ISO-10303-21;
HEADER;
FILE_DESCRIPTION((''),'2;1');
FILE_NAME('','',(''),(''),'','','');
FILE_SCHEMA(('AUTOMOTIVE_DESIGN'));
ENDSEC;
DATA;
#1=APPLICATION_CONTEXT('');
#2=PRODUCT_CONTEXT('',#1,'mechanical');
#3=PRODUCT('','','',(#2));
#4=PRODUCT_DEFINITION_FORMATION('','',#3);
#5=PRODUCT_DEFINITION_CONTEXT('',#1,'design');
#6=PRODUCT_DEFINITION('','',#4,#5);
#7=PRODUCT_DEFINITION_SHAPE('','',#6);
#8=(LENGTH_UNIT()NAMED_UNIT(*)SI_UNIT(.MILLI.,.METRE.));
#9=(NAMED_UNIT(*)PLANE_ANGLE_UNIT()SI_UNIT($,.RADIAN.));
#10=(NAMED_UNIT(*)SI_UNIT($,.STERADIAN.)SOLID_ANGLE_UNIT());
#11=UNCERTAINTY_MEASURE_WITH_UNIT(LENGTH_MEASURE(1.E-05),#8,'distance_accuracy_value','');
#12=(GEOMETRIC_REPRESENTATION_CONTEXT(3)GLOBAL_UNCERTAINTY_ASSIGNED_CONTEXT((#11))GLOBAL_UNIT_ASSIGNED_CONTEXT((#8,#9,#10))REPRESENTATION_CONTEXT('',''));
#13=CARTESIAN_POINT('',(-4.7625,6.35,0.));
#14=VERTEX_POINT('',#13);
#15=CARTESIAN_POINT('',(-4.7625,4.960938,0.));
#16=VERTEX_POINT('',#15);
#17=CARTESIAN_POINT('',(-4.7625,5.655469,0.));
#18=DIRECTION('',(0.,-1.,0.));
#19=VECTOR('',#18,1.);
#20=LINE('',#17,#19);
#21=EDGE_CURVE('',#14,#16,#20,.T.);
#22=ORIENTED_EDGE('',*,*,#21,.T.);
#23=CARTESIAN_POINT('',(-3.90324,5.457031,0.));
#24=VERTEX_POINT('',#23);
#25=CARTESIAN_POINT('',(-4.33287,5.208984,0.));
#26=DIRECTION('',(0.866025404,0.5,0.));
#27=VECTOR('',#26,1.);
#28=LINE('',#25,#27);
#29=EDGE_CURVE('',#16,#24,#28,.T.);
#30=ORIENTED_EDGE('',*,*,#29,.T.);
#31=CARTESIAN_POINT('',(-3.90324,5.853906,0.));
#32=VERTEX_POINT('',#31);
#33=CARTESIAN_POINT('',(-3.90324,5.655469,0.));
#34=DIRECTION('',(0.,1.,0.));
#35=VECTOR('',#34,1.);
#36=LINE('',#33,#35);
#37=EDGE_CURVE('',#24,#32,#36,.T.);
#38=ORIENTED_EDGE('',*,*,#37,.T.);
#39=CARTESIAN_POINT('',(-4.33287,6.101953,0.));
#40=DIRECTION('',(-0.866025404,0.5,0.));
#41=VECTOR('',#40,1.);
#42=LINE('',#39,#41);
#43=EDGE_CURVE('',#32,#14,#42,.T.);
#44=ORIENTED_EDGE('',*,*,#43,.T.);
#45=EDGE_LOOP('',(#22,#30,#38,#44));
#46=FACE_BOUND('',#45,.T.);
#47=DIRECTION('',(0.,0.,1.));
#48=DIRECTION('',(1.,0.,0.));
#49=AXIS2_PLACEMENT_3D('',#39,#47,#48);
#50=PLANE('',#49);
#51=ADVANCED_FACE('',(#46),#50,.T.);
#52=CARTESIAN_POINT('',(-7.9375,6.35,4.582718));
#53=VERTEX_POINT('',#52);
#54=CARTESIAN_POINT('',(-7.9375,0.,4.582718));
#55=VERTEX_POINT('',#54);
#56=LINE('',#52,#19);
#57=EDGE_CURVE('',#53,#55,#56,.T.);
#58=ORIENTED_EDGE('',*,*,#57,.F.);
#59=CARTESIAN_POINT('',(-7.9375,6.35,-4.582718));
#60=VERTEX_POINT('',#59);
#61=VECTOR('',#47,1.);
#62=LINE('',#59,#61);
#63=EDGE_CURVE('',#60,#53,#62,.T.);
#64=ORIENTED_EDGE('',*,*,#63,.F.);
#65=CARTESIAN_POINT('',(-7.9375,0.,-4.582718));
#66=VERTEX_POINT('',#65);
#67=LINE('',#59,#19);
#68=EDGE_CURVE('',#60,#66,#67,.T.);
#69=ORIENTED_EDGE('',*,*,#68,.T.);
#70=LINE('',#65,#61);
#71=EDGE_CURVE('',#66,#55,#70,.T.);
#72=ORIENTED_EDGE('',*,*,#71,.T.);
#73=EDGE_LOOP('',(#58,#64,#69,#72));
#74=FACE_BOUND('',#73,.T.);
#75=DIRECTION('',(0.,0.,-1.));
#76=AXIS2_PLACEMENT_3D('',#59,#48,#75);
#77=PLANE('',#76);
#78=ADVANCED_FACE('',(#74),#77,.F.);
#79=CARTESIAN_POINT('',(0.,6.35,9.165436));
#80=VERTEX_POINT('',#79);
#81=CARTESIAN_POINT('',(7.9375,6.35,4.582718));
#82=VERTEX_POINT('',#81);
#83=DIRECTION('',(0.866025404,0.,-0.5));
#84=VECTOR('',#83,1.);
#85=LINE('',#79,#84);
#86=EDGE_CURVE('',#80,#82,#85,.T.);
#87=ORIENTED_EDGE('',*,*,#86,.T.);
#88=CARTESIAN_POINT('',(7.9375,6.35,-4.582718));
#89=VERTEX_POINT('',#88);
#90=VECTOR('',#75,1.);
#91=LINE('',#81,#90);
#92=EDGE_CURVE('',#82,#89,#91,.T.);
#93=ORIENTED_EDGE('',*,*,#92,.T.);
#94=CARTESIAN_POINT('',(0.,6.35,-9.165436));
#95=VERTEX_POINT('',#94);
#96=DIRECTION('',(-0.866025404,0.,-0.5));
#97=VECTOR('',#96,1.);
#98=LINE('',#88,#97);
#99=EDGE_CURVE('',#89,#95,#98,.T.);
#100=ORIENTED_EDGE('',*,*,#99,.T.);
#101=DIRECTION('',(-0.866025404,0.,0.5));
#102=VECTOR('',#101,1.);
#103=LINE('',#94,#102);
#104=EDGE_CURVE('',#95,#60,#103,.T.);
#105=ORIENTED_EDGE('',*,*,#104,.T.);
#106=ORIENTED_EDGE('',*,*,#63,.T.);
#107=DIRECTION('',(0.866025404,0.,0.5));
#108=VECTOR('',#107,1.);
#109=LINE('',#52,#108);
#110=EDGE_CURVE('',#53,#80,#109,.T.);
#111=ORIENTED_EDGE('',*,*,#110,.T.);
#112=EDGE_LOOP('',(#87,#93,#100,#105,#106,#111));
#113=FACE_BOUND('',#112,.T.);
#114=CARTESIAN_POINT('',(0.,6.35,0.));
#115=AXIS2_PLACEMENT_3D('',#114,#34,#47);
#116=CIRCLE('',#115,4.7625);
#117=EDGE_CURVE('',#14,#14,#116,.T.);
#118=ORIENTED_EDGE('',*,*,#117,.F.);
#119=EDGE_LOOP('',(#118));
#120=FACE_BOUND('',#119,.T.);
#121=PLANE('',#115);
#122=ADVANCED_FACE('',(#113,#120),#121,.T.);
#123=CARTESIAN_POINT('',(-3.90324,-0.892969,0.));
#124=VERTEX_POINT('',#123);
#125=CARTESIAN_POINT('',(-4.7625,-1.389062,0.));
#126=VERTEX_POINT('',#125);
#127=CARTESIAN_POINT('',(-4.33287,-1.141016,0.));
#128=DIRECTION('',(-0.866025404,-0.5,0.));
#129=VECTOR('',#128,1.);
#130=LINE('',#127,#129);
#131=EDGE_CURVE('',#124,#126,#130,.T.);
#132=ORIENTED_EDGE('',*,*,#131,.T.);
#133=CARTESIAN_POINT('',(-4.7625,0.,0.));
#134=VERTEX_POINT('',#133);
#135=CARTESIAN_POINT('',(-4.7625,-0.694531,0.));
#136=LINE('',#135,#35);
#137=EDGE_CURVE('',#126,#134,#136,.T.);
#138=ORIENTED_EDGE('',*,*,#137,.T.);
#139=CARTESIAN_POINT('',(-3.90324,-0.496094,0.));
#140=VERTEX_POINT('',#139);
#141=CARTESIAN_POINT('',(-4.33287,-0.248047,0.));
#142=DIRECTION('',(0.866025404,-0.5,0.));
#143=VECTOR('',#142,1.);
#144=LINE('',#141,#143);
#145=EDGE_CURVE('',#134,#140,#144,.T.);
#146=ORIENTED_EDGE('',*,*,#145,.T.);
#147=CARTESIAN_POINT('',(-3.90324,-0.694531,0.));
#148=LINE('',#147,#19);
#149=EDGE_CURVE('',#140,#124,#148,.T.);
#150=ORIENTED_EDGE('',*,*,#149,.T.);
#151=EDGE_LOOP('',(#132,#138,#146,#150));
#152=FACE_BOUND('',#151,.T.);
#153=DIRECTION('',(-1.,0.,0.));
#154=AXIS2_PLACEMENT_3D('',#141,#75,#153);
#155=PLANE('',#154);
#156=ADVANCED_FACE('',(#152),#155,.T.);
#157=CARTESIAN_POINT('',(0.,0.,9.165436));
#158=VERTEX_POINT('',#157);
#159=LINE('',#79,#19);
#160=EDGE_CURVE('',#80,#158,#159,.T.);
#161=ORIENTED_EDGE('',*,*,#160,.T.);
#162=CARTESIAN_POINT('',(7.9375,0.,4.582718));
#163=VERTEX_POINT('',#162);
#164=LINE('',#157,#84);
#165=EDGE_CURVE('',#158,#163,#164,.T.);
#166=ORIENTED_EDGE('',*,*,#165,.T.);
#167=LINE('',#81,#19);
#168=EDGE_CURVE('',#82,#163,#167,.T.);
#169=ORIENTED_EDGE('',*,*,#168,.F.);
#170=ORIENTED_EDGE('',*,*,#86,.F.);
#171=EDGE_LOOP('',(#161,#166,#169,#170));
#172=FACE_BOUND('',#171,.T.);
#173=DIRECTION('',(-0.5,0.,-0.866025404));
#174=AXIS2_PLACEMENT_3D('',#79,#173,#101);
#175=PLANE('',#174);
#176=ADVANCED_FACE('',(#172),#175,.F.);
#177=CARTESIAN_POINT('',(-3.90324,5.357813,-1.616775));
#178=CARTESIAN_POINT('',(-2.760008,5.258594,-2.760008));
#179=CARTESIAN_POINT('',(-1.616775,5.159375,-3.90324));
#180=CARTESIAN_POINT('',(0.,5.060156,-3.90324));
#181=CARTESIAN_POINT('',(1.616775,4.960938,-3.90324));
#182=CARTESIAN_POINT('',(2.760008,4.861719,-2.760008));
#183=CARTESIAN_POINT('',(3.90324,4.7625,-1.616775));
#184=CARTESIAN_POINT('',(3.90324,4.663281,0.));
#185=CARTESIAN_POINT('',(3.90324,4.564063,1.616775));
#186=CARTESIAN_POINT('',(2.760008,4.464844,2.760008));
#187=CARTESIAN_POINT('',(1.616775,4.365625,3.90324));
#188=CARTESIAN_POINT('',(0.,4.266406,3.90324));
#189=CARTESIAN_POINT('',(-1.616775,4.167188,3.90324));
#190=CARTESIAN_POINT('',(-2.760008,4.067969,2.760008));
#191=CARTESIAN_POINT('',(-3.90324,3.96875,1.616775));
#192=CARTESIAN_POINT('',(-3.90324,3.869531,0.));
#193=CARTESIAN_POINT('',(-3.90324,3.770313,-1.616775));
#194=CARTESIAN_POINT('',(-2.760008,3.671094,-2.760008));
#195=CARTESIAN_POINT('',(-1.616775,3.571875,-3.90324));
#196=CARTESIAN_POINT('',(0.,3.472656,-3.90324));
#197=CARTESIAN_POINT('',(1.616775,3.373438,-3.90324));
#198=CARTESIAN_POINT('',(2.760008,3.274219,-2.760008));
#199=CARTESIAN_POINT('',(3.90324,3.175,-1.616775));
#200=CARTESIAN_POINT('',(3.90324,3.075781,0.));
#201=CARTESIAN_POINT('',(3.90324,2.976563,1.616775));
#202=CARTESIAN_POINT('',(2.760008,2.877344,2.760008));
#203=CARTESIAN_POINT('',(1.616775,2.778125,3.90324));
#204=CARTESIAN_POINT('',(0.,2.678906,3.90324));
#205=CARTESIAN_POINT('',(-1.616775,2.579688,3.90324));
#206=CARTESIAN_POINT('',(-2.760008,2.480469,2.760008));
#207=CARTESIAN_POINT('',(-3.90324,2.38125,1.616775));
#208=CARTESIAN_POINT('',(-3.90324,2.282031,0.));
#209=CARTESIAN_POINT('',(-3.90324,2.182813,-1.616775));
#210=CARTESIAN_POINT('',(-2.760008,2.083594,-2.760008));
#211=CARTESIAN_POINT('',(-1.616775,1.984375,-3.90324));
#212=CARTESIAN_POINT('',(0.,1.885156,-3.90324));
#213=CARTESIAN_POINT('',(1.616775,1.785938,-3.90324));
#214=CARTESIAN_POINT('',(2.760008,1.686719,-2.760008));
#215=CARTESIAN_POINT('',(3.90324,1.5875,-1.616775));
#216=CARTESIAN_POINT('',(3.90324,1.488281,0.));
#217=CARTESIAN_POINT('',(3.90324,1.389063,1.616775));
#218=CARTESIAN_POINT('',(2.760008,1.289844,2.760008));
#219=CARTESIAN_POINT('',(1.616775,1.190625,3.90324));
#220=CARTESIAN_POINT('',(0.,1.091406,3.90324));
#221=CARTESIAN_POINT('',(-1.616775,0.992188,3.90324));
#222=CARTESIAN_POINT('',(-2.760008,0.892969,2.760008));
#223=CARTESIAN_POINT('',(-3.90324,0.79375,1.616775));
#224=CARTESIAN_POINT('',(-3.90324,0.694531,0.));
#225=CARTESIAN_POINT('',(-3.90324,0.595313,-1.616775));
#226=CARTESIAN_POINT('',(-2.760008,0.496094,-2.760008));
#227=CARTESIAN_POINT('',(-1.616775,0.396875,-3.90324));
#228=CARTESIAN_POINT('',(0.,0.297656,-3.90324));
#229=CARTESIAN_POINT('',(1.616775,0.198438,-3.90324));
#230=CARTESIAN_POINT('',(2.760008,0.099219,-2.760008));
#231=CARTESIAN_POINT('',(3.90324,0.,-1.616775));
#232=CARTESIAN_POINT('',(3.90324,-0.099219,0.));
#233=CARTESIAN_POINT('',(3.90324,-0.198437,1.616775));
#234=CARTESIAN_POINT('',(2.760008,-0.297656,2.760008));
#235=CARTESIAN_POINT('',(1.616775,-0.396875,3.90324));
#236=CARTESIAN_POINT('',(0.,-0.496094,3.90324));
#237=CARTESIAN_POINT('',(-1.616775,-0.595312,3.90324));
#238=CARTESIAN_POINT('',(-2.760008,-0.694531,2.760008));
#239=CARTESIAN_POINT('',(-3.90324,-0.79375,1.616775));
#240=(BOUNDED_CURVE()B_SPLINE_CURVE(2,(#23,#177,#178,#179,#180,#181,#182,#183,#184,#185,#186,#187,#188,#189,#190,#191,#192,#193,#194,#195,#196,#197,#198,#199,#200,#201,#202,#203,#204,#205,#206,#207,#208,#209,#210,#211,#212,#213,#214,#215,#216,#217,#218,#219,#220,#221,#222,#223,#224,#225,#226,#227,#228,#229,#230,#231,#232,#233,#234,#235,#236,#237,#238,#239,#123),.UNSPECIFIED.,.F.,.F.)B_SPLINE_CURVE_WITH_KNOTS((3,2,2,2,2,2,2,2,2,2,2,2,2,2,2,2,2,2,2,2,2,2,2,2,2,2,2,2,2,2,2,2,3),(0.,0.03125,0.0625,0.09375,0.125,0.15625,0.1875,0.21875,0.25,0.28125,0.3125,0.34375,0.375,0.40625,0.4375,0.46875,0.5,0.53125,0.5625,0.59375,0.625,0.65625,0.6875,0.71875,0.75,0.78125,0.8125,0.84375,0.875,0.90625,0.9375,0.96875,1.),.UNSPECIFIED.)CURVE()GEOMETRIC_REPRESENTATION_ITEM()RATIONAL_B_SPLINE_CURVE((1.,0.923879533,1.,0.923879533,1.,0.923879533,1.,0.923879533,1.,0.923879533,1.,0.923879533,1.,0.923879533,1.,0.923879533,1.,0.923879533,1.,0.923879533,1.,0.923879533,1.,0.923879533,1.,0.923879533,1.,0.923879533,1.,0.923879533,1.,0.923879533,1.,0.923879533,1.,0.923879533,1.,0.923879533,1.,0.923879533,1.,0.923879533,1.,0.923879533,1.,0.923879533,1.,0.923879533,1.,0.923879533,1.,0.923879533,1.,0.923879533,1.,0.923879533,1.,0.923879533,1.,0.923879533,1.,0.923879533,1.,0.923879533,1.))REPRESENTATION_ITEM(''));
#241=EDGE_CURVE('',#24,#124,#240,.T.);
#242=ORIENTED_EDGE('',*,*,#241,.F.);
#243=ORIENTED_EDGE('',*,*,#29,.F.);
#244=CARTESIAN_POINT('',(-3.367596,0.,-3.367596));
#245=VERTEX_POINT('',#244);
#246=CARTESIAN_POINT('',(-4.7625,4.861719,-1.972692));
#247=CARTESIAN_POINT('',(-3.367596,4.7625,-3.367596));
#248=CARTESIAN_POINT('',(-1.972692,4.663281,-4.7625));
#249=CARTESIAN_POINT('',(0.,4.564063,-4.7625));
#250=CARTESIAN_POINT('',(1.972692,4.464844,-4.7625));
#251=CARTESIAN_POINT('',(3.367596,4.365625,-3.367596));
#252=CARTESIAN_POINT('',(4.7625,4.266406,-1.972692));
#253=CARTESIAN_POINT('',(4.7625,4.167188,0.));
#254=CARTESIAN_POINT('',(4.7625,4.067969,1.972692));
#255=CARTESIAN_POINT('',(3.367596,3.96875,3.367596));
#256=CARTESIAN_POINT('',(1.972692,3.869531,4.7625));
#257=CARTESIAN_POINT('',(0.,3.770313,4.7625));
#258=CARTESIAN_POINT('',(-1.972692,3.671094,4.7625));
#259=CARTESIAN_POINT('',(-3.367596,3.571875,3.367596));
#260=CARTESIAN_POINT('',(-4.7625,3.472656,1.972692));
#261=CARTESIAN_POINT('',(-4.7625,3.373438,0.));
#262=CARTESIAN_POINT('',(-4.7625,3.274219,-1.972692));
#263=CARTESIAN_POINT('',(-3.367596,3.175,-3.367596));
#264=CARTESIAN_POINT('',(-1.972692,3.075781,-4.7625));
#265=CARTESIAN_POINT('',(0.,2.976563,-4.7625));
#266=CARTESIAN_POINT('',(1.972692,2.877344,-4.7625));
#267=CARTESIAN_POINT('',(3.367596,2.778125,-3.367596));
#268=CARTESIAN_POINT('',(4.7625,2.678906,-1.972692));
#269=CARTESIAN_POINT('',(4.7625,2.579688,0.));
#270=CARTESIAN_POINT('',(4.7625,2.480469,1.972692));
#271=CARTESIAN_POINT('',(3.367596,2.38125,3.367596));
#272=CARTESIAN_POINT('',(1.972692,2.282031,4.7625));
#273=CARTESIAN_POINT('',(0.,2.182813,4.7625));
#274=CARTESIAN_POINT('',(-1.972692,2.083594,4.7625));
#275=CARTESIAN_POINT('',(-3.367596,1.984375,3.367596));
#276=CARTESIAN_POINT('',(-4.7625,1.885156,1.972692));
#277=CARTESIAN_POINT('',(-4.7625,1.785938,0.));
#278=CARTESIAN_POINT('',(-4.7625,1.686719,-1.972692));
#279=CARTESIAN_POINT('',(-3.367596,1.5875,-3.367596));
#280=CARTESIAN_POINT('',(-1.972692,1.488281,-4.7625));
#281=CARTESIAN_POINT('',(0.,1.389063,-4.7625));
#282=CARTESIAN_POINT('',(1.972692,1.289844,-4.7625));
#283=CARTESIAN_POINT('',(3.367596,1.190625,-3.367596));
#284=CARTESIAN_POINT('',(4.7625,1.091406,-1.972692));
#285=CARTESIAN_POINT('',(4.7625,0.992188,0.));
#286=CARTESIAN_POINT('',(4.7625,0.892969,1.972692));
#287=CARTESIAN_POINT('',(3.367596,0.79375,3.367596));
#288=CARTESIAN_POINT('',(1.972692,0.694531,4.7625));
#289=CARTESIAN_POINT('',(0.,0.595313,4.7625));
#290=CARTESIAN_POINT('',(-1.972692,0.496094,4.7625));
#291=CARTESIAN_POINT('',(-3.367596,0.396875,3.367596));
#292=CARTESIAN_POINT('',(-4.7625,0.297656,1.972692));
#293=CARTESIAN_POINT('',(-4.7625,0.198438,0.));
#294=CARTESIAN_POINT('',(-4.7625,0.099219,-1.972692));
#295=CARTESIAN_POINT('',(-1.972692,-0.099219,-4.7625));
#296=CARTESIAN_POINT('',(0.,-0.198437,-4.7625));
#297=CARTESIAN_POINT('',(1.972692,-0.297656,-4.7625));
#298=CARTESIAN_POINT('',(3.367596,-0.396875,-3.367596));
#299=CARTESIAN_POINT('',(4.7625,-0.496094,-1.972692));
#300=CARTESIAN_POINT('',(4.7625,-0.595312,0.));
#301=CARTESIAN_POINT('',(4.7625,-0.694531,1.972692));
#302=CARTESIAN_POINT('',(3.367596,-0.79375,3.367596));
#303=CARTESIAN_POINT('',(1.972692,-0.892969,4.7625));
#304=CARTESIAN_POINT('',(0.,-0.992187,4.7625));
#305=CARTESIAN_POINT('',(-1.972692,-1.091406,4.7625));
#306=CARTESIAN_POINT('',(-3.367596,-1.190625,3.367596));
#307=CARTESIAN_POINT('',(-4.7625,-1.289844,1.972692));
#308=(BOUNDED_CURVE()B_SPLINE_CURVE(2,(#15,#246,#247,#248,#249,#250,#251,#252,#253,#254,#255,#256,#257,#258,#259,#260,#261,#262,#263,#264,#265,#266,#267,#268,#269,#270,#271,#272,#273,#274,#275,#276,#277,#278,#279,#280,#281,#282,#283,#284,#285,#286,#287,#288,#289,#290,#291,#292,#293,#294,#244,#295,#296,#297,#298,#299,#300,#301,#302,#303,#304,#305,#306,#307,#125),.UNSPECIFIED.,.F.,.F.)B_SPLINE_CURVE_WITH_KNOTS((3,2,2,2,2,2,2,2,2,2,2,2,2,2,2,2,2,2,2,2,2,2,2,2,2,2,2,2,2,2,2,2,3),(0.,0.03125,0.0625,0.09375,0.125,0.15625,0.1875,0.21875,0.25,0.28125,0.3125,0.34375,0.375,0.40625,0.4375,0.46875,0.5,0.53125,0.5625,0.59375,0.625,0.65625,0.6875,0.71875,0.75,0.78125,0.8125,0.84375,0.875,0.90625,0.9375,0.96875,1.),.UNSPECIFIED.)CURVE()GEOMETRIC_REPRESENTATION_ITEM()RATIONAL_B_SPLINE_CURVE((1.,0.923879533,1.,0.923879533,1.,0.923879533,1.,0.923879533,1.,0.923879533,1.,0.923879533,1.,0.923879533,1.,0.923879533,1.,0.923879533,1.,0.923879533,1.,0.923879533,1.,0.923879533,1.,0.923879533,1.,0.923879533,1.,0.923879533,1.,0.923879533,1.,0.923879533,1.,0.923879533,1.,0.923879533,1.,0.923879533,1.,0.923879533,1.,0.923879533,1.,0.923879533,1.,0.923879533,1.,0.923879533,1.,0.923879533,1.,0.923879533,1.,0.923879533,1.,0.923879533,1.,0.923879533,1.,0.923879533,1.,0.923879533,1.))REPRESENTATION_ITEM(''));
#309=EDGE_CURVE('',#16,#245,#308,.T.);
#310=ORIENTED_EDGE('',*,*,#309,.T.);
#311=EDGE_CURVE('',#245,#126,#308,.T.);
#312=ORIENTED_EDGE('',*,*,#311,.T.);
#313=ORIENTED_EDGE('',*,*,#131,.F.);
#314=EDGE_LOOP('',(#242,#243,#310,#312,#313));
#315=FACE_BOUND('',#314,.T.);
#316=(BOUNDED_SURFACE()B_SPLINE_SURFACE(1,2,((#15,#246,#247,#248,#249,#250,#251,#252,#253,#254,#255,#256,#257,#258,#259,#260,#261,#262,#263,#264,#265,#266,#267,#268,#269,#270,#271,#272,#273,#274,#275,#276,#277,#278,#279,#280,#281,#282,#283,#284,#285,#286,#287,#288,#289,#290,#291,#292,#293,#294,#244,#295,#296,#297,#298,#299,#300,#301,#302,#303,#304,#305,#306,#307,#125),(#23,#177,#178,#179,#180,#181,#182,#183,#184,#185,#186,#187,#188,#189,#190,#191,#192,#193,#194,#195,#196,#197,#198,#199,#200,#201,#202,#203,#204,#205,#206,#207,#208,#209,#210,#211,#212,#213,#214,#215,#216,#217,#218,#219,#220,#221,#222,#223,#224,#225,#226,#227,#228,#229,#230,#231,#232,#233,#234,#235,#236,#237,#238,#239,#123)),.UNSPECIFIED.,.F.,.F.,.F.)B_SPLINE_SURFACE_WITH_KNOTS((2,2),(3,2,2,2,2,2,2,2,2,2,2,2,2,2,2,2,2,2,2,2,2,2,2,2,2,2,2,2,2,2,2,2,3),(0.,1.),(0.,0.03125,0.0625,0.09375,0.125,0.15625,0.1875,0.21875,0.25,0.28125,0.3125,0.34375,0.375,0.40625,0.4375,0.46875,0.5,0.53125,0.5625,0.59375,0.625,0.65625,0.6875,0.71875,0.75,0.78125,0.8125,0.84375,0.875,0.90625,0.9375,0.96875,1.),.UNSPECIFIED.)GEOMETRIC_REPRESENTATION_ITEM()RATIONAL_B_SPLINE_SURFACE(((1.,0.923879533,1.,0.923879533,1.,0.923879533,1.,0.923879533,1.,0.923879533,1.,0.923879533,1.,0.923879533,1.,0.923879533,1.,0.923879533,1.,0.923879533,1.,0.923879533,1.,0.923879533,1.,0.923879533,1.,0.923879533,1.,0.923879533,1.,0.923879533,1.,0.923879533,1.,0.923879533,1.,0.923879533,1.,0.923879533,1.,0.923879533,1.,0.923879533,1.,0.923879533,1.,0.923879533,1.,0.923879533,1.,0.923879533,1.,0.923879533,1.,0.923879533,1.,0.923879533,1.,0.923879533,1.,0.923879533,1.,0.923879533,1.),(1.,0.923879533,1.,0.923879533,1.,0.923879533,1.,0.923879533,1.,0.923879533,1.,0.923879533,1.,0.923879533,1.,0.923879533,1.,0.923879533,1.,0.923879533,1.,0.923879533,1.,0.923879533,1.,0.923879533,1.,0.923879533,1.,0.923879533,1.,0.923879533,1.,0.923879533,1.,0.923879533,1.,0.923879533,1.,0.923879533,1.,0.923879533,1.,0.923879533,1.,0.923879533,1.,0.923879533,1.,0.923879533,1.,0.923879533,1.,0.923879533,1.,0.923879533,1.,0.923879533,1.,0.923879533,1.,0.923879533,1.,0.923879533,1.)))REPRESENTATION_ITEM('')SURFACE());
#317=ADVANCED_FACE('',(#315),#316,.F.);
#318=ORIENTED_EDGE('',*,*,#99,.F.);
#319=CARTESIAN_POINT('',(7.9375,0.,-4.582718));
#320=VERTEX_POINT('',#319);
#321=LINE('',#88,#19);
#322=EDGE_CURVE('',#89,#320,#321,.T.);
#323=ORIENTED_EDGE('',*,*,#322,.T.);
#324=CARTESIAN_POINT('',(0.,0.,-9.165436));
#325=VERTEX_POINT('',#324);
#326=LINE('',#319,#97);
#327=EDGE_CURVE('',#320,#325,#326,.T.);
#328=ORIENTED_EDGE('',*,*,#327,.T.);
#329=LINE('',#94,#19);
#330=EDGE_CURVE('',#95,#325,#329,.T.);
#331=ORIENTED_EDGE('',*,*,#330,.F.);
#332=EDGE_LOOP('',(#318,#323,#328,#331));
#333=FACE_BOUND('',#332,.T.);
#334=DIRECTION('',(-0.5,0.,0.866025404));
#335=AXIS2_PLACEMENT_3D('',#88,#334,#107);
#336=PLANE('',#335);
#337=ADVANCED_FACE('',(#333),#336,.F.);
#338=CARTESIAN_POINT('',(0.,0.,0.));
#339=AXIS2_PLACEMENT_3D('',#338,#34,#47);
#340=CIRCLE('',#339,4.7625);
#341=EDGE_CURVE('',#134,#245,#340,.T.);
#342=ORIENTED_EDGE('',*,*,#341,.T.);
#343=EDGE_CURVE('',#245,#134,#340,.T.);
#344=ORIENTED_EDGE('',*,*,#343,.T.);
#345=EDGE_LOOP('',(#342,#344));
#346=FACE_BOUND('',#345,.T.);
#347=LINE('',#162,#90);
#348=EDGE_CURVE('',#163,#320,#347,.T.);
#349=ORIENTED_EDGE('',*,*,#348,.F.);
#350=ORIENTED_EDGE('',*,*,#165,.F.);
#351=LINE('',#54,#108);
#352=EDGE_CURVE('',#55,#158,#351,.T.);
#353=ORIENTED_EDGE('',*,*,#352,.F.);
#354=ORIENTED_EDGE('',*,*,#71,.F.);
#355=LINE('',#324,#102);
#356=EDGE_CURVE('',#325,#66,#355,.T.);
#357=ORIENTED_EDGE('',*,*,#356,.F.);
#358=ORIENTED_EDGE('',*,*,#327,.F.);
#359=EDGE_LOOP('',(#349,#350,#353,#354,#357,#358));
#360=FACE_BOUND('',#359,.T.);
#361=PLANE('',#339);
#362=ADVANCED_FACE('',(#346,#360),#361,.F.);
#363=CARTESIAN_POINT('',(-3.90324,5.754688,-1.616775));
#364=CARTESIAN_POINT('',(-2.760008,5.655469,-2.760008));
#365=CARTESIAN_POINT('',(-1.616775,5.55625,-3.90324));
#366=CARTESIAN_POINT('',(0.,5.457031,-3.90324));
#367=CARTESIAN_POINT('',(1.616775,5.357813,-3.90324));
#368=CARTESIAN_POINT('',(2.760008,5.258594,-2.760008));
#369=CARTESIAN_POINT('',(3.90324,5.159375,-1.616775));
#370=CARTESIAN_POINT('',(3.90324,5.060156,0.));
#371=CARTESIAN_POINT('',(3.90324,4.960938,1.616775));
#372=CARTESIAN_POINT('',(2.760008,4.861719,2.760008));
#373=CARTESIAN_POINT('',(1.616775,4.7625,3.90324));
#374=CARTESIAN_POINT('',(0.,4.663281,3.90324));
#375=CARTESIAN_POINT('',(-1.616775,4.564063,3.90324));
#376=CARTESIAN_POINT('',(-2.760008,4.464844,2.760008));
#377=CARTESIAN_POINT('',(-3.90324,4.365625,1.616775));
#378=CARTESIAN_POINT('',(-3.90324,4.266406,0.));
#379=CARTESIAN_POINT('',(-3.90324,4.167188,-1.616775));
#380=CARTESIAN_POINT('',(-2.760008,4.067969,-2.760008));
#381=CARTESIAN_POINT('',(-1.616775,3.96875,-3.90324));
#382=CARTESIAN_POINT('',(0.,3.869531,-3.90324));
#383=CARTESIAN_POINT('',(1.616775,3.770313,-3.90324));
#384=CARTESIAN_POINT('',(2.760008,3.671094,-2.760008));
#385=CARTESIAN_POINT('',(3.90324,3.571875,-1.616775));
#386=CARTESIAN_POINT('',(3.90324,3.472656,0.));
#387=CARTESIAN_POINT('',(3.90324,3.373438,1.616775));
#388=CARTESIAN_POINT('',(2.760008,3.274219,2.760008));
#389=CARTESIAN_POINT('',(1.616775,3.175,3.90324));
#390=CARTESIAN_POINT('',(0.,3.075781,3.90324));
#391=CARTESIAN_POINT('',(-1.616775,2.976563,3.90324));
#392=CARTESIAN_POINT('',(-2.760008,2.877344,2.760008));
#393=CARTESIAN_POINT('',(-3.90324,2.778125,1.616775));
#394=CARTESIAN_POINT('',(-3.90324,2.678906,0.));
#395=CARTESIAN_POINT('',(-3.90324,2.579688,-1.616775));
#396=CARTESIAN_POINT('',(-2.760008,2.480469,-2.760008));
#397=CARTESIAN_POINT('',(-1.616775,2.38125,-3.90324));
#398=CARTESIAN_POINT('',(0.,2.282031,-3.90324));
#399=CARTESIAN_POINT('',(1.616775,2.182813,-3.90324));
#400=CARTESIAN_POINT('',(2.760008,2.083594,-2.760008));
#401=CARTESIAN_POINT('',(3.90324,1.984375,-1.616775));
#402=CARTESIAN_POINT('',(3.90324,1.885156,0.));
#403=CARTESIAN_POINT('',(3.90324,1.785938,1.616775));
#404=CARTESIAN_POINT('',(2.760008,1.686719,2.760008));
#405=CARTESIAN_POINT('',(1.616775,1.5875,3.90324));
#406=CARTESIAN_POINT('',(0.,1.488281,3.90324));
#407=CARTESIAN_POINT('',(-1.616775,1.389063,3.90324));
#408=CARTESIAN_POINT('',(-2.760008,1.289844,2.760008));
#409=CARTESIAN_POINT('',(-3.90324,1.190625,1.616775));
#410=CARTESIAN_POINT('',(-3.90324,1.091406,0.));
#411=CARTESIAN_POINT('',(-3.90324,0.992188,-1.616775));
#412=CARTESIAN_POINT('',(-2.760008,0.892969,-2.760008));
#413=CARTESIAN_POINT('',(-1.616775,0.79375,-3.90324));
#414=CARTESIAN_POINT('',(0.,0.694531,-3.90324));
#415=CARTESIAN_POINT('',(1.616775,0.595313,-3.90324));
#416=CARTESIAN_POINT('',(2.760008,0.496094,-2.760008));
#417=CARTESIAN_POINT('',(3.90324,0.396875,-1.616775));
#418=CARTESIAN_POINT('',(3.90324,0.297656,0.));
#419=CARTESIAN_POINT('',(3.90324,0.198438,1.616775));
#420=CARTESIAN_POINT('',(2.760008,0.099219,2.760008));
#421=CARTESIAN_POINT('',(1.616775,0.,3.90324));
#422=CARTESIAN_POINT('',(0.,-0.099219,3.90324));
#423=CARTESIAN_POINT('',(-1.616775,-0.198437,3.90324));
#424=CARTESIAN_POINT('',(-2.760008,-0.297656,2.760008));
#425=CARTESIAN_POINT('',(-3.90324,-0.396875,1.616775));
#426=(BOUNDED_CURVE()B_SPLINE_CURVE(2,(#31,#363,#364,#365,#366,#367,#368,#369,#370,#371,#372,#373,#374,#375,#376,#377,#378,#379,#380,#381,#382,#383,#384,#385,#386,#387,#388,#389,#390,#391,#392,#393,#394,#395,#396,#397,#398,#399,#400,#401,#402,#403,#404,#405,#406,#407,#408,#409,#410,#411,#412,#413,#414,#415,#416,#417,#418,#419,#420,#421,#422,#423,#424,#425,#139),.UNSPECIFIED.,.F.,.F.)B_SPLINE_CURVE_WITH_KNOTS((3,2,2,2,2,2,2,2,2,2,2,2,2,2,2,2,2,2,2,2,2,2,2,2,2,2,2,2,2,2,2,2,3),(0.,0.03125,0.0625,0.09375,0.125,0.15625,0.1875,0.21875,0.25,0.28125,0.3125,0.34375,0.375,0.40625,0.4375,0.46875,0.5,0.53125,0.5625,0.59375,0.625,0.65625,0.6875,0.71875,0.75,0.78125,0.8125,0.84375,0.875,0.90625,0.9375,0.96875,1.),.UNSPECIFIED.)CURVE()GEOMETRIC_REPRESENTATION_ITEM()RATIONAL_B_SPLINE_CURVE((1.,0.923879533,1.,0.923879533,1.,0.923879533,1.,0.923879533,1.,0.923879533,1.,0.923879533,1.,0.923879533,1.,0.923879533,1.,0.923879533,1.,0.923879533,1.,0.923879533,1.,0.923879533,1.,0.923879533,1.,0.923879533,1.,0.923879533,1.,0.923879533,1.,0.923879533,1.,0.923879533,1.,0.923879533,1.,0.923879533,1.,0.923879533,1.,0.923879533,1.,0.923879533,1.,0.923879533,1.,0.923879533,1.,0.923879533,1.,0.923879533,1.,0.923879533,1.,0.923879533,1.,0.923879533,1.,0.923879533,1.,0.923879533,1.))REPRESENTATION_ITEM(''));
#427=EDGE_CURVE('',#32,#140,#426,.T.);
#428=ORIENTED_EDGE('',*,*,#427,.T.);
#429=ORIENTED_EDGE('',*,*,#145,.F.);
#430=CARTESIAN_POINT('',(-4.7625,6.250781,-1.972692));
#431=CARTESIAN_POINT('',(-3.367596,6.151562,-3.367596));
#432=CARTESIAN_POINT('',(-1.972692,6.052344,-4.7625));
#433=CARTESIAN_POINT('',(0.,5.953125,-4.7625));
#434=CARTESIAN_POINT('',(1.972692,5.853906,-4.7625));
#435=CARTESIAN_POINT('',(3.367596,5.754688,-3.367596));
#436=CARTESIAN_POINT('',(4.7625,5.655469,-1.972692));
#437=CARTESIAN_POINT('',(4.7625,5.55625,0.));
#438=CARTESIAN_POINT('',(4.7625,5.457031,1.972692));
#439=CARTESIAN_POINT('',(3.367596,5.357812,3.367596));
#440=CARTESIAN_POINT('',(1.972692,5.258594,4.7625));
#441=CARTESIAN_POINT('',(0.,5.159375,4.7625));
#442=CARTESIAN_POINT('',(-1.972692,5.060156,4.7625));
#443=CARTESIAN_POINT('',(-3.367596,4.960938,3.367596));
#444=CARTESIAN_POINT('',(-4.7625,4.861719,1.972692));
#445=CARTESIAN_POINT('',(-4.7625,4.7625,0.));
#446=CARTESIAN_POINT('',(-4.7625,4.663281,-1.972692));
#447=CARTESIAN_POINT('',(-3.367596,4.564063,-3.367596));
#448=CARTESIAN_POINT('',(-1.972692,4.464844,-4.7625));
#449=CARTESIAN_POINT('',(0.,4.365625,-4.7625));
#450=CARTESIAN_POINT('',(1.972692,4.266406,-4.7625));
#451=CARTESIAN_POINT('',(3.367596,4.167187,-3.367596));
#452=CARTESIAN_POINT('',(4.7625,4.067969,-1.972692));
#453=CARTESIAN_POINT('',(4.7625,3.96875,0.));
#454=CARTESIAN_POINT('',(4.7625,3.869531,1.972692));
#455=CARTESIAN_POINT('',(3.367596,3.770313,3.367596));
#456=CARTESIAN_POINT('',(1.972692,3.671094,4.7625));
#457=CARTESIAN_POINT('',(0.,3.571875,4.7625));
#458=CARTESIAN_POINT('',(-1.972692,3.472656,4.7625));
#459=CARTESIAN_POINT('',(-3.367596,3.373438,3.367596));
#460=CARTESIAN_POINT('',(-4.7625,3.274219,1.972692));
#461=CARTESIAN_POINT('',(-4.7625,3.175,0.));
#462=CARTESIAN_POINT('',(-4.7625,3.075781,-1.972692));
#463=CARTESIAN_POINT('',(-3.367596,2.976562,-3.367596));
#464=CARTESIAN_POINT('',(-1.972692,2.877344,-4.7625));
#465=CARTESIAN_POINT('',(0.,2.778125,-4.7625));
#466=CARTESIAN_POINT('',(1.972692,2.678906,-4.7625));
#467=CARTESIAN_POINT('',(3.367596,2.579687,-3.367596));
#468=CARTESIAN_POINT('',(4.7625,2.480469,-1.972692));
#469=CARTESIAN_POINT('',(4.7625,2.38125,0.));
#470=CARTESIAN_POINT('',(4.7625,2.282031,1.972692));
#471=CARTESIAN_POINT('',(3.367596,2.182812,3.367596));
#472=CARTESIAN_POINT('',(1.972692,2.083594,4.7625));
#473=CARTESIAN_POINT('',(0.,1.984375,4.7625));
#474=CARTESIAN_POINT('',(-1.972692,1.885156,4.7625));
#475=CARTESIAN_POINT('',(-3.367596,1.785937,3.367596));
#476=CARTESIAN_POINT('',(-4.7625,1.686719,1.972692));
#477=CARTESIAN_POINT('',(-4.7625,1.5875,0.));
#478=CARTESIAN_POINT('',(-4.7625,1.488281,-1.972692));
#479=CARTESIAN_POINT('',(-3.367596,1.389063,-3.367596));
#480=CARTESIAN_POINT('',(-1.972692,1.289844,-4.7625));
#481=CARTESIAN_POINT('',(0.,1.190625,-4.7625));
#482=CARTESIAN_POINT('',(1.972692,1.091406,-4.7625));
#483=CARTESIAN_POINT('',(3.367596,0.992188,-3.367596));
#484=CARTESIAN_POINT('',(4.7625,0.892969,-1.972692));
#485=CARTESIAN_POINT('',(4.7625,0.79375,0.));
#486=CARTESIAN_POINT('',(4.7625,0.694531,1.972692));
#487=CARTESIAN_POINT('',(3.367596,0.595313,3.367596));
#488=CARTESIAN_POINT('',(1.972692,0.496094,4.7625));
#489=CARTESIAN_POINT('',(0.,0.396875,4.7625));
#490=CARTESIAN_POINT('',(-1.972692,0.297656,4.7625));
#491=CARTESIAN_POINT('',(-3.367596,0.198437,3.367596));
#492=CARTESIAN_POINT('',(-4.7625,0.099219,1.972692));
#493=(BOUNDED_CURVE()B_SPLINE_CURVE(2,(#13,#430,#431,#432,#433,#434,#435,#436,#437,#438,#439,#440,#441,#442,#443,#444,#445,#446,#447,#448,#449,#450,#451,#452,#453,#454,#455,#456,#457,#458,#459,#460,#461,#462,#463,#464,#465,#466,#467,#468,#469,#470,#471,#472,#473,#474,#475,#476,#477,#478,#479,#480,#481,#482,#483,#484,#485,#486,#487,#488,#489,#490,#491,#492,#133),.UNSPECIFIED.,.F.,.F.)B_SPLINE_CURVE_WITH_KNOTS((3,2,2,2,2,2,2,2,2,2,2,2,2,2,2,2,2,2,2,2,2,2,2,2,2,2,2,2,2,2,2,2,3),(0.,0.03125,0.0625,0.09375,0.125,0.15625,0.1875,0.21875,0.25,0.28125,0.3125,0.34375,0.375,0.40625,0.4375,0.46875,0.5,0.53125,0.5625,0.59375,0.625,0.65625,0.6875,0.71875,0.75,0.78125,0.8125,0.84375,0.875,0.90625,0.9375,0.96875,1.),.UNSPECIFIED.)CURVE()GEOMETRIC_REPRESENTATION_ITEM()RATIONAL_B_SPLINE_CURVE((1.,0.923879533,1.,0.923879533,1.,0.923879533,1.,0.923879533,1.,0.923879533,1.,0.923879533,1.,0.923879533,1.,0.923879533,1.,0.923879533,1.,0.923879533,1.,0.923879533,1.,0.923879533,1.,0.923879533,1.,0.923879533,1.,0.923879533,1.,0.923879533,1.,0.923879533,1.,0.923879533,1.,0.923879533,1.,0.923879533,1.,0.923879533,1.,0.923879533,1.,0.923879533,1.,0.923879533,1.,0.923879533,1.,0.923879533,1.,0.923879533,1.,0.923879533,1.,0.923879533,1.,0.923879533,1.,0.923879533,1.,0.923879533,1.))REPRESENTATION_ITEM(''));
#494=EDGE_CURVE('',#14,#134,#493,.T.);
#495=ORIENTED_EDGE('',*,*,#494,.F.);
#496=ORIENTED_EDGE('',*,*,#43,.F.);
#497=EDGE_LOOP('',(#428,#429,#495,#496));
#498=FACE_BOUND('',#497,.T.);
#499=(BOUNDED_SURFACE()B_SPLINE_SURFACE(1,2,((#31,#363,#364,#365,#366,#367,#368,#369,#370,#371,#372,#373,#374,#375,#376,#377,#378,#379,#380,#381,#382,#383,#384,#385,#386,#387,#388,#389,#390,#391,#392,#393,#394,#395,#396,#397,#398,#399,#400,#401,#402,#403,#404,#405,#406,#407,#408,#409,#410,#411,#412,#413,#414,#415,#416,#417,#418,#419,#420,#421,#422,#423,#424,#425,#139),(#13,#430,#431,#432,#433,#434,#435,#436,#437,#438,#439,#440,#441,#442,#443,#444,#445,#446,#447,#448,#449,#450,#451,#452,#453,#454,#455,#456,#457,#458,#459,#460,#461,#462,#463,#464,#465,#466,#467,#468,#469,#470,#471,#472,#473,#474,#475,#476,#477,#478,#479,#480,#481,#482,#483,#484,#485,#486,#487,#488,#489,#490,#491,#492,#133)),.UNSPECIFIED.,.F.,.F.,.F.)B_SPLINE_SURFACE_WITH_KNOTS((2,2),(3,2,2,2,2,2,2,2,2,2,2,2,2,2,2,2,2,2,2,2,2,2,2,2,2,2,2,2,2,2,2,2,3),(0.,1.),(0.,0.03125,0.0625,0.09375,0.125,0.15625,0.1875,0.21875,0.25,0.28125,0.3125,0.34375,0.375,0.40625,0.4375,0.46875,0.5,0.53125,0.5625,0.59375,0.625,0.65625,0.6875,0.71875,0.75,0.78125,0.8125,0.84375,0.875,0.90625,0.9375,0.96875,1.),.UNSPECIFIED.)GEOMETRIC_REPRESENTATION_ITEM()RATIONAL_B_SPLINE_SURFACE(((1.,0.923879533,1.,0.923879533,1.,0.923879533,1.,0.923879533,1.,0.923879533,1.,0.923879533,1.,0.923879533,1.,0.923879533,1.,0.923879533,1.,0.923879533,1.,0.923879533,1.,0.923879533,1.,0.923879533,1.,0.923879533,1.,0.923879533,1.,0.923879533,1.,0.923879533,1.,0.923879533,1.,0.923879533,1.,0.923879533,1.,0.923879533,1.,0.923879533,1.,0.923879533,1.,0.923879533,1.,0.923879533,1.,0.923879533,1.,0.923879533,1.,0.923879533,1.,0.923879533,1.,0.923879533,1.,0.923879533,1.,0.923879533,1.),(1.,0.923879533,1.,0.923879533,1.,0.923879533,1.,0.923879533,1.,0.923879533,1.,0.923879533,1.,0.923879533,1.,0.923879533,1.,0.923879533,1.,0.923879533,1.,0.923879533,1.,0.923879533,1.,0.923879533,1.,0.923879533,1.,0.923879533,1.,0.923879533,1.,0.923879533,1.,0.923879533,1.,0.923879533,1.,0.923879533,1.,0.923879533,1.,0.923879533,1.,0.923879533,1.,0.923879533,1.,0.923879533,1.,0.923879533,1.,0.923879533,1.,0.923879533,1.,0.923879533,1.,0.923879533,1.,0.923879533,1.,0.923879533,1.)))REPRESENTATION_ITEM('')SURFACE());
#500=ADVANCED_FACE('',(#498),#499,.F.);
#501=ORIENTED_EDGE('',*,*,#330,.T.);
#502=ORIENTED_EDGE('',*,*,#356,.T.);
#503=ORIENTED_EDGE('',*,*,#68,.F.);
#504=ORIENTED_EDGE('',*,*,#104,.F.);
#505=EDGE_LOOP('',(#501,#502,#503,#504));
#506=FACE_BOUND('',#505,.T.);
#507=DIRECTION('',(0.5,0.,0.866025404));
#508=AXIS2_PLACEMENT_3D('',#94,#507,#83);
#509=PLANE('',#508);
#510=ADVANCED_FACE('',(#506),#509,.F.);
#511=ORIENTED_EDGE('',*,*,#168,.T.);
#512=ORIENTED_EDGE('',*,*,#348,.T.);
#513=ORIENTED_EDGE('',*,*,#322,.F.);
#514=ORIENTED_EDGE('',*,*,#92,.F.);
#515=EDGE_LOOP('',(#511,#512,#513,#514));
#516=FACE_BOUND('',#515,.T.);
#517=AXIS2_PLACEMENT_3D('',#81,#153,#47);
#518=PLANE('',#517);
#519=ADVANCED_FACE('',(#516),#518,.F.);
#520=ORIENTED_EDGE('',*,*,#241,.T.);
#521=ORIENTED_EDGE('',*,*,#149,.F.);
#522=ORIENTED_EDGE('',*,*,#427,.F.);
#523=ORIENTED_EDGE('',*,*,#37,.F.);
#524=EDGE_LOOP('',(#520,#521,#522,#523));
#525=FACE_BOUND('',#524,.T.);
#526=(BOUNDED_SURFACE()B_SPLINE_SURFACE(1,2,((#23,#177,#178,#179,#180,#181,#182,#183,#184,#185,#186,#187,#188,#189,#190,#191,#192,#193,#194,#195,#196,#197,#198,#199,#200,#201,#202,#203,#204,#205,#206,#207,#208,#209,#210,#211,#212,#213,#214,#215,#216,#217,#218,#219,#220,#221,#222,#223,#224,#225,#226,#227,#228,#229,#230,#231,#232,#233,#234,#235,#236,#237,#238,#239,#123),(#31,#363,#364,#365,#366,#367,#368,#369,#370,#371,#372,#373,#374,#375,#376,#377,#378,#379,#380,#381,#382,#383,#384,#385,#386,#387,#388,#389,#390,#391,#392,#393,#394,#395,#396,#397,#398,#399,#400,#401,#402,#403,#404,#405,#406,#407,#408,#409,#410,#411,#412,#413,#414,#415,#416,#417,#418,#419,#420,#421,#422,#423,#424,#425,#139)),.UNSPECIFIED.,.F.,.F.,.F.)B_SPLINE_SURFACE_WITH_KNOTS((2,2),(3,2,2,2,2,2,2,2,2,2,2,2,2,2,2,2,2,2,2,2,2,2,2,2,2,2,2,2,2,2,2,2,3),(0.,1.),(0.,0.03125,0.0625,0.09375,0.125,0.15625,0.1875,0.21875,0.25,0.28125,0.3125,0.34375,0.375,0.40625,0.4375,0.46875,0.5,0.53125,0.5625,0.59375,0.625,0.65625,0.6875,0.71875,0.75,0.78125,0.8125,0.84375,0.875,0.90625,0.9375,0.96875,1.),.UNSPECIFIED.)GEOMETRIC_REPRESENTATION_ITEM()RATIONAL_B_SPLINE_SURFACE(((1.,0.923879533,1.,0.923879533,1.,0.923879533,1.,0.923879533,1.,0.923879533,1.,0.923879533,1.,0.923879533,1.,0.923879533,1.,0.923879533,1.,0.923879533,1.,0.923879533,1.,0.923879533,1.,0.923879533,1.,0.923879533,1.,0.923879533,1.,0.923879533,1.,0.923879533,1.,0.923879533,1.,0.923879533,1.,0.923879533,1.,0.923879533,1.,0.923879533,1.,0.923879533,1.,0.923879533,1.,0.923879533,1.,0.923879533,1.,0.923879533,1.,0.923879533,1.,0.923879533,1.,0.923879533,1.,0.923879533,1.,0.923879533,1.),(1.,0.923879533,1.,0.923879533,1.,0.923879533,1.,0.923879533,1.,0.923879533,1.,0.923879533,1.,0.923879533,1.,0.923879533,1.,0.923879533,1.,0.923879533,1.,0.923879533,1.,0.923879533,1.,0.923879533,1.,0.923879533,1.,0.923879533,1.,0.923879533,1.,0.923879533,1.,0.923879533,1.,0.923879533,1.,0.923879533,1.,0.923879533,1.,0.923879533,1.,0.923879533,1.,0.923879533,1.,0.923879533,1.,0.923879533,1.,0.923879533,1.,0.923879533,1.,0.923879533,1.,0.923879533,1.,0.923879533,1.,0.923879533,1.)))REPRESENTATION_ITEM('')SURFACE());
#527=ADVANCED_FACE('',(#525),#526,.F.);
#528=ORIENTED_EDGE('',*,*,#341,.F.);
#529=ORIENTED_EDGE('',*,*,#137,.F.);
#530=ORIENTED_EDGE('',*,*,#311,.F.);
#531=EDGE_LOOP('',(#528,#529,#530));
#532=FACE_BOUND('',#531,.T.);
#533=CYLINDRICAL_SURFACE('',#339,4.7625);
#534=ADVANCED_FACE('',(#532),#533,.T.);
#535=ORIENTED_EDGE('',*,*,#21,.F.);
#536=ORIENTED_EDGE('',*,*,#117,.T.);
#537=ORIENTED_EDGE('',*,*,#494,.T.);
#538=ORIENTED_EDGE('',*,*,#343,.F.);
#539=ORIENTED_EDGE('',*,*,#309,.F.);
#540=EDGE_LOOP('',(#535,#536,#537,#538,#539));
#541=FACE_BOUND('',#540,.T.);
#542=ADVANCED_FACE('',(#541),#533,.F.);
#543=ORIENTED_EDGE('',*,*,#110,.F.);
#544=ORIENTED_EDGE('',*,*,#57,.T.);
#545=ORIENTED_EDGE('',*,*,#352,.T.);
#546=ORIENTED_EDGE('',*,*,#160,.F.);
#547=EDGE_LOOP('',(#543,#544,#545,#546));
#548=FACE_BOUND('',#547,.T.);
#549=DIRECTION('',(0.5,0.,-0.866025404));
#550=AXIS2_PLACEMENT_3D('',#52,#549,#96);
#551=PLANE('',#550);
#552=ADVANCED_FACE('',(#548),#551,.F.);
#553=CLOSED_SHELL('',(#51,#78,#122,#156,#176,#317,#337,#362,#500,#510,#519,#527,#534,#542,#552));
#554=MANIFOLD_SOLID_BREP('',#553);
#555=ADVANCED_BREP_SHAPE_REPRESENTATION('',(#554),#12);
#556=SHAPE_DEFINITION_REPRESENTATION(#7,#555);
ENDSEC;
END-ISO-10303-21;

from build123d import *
from build123d.topology import SkipClean

# Parameters (mm, degrees)
BOSS_EXTRUDE1_DEPTH = 6.35
SKETCH2_R           = 4.7625
CUT_EXTRUDE1_DEPTH  = 14.68691399
THREAD1_PITCH       = 1.5875


with BuildPart() as part:
    # Sketch1 → Boss-Extrude1 (new body)
    with BuildSketch(Plane(origin=(0, 0, 0), x_dir=(1, 0, 0), z_dir=(0, 1, 0))):
        Polygon((7.9375, -4.582717762), (7.9375, 4.582717762), (0, 9.165435523), (-7.9375, 4.582717762), (-7.9375, -4.582717762), (0, -9.165435523), align=None)
    extrude(amount=BOSS_EXTRUDE1_DEPTH)

    # Sketch2 → Cut-Extrude1 (cut, through all)
    with BuildSketch(Plane(origin=(0, 6.35, 0), x_dir=(1, 0, 0), z_dir=(0, 1, 0))):
        with Locations(Location((0, 0, 0), (0, 0, 270))):
            Circle(SKETCH2_R)
    extrude(amount=-CUT_EXTRUDE1_DEPTH, mode=Mode.SUBTRACT)

    # Thread1: the profile of Thread Profile1 profile screwed along a right-hand helix of 4 turns, 8 arcs to a turn; built about Z, then put on its axis
    with SkipClean():  # the faces are left unmerged after this step: merging them gives an invalid solid
        thread1_z = Axis((0, 0, 0), (0, 0, 1))
        thread1_corners = [(4.7628, 0, -0.000173205), (4.7628, 0, 1.389235701), (3.903240423, 0, 0.892968748), (3.903240423, 0, 0.496093748)]
        with BuildLine(mode=Mode.PRIVATE) as thread1_profile:
            Line(thread1_corners[0], thread1_corners[1])
            Line(thread1_corners[1], thread1_corners[2])
            Line(thread1_corners[2], thread1_corners[3])
            Line(thread1_corners[3], thread1_corners[0])
        thread1_cap = Face(thread1_profile.wire())
        thread1_turn_angles = [0, 22.5, 45, 67.5, 90, 112.5, 135, 157.5, 180, 202.5, 225, 247.5, 270, 292.5, 315, 337.5, 360]
        thread1_turn_weights = [1, 0.9238795325112867, 1, 0.9238795325112867, 1, 0.9238795325112867, 1, 0.9238795325112867, 1, 0.9238795325112867, 1, 0.9238795325112867, 1, 0.9238795325112867, 1, 0.9238795325112867, 1]
        thread1_turn_rails = [Edge.make_bspline([Vector(p[0], p[1], 0).rotate(thread1_z, thread1_turn_angles[k]) / thread1_turn_weights[k] + Vector(0, 0, p[2] + THREAD1_PITCH * thread1_turn_angles[k] / 360) for k in range(17)], [0, 0, 0, 1, 1, 2, 2, 3, 3, 4, 4, 5, 5, 6, 6, 7, 7, 8, 8, 8], 2, thread1_turn_weights) for p in thread1_corners]
        thread1_turn_sides = [Face.make_surface_from_curves(thread1_turn_rails[p[0]], thread1_turn_rails[p[1]]) for p in [(0, 1), (1, 2), (2, 3), (3, 0)]]
        thread1 = Plane(origin=(0, 6.35, 0), x_dir=(-1, 0, 0), z_dir=(0, -1, 0)) * Solid(Shell([*[p.moved(Location((0, 0, THREAD1_PITCH * i))) for i in range(4) for p in thread1_turn_sides], thread1_cap, thread1_cap.rotate(thread1_z, 1440).moved(Location((0, 0, THREAD1_PITCH * 1440 / 360)))]))
        add(thread1)


solid = part.part
